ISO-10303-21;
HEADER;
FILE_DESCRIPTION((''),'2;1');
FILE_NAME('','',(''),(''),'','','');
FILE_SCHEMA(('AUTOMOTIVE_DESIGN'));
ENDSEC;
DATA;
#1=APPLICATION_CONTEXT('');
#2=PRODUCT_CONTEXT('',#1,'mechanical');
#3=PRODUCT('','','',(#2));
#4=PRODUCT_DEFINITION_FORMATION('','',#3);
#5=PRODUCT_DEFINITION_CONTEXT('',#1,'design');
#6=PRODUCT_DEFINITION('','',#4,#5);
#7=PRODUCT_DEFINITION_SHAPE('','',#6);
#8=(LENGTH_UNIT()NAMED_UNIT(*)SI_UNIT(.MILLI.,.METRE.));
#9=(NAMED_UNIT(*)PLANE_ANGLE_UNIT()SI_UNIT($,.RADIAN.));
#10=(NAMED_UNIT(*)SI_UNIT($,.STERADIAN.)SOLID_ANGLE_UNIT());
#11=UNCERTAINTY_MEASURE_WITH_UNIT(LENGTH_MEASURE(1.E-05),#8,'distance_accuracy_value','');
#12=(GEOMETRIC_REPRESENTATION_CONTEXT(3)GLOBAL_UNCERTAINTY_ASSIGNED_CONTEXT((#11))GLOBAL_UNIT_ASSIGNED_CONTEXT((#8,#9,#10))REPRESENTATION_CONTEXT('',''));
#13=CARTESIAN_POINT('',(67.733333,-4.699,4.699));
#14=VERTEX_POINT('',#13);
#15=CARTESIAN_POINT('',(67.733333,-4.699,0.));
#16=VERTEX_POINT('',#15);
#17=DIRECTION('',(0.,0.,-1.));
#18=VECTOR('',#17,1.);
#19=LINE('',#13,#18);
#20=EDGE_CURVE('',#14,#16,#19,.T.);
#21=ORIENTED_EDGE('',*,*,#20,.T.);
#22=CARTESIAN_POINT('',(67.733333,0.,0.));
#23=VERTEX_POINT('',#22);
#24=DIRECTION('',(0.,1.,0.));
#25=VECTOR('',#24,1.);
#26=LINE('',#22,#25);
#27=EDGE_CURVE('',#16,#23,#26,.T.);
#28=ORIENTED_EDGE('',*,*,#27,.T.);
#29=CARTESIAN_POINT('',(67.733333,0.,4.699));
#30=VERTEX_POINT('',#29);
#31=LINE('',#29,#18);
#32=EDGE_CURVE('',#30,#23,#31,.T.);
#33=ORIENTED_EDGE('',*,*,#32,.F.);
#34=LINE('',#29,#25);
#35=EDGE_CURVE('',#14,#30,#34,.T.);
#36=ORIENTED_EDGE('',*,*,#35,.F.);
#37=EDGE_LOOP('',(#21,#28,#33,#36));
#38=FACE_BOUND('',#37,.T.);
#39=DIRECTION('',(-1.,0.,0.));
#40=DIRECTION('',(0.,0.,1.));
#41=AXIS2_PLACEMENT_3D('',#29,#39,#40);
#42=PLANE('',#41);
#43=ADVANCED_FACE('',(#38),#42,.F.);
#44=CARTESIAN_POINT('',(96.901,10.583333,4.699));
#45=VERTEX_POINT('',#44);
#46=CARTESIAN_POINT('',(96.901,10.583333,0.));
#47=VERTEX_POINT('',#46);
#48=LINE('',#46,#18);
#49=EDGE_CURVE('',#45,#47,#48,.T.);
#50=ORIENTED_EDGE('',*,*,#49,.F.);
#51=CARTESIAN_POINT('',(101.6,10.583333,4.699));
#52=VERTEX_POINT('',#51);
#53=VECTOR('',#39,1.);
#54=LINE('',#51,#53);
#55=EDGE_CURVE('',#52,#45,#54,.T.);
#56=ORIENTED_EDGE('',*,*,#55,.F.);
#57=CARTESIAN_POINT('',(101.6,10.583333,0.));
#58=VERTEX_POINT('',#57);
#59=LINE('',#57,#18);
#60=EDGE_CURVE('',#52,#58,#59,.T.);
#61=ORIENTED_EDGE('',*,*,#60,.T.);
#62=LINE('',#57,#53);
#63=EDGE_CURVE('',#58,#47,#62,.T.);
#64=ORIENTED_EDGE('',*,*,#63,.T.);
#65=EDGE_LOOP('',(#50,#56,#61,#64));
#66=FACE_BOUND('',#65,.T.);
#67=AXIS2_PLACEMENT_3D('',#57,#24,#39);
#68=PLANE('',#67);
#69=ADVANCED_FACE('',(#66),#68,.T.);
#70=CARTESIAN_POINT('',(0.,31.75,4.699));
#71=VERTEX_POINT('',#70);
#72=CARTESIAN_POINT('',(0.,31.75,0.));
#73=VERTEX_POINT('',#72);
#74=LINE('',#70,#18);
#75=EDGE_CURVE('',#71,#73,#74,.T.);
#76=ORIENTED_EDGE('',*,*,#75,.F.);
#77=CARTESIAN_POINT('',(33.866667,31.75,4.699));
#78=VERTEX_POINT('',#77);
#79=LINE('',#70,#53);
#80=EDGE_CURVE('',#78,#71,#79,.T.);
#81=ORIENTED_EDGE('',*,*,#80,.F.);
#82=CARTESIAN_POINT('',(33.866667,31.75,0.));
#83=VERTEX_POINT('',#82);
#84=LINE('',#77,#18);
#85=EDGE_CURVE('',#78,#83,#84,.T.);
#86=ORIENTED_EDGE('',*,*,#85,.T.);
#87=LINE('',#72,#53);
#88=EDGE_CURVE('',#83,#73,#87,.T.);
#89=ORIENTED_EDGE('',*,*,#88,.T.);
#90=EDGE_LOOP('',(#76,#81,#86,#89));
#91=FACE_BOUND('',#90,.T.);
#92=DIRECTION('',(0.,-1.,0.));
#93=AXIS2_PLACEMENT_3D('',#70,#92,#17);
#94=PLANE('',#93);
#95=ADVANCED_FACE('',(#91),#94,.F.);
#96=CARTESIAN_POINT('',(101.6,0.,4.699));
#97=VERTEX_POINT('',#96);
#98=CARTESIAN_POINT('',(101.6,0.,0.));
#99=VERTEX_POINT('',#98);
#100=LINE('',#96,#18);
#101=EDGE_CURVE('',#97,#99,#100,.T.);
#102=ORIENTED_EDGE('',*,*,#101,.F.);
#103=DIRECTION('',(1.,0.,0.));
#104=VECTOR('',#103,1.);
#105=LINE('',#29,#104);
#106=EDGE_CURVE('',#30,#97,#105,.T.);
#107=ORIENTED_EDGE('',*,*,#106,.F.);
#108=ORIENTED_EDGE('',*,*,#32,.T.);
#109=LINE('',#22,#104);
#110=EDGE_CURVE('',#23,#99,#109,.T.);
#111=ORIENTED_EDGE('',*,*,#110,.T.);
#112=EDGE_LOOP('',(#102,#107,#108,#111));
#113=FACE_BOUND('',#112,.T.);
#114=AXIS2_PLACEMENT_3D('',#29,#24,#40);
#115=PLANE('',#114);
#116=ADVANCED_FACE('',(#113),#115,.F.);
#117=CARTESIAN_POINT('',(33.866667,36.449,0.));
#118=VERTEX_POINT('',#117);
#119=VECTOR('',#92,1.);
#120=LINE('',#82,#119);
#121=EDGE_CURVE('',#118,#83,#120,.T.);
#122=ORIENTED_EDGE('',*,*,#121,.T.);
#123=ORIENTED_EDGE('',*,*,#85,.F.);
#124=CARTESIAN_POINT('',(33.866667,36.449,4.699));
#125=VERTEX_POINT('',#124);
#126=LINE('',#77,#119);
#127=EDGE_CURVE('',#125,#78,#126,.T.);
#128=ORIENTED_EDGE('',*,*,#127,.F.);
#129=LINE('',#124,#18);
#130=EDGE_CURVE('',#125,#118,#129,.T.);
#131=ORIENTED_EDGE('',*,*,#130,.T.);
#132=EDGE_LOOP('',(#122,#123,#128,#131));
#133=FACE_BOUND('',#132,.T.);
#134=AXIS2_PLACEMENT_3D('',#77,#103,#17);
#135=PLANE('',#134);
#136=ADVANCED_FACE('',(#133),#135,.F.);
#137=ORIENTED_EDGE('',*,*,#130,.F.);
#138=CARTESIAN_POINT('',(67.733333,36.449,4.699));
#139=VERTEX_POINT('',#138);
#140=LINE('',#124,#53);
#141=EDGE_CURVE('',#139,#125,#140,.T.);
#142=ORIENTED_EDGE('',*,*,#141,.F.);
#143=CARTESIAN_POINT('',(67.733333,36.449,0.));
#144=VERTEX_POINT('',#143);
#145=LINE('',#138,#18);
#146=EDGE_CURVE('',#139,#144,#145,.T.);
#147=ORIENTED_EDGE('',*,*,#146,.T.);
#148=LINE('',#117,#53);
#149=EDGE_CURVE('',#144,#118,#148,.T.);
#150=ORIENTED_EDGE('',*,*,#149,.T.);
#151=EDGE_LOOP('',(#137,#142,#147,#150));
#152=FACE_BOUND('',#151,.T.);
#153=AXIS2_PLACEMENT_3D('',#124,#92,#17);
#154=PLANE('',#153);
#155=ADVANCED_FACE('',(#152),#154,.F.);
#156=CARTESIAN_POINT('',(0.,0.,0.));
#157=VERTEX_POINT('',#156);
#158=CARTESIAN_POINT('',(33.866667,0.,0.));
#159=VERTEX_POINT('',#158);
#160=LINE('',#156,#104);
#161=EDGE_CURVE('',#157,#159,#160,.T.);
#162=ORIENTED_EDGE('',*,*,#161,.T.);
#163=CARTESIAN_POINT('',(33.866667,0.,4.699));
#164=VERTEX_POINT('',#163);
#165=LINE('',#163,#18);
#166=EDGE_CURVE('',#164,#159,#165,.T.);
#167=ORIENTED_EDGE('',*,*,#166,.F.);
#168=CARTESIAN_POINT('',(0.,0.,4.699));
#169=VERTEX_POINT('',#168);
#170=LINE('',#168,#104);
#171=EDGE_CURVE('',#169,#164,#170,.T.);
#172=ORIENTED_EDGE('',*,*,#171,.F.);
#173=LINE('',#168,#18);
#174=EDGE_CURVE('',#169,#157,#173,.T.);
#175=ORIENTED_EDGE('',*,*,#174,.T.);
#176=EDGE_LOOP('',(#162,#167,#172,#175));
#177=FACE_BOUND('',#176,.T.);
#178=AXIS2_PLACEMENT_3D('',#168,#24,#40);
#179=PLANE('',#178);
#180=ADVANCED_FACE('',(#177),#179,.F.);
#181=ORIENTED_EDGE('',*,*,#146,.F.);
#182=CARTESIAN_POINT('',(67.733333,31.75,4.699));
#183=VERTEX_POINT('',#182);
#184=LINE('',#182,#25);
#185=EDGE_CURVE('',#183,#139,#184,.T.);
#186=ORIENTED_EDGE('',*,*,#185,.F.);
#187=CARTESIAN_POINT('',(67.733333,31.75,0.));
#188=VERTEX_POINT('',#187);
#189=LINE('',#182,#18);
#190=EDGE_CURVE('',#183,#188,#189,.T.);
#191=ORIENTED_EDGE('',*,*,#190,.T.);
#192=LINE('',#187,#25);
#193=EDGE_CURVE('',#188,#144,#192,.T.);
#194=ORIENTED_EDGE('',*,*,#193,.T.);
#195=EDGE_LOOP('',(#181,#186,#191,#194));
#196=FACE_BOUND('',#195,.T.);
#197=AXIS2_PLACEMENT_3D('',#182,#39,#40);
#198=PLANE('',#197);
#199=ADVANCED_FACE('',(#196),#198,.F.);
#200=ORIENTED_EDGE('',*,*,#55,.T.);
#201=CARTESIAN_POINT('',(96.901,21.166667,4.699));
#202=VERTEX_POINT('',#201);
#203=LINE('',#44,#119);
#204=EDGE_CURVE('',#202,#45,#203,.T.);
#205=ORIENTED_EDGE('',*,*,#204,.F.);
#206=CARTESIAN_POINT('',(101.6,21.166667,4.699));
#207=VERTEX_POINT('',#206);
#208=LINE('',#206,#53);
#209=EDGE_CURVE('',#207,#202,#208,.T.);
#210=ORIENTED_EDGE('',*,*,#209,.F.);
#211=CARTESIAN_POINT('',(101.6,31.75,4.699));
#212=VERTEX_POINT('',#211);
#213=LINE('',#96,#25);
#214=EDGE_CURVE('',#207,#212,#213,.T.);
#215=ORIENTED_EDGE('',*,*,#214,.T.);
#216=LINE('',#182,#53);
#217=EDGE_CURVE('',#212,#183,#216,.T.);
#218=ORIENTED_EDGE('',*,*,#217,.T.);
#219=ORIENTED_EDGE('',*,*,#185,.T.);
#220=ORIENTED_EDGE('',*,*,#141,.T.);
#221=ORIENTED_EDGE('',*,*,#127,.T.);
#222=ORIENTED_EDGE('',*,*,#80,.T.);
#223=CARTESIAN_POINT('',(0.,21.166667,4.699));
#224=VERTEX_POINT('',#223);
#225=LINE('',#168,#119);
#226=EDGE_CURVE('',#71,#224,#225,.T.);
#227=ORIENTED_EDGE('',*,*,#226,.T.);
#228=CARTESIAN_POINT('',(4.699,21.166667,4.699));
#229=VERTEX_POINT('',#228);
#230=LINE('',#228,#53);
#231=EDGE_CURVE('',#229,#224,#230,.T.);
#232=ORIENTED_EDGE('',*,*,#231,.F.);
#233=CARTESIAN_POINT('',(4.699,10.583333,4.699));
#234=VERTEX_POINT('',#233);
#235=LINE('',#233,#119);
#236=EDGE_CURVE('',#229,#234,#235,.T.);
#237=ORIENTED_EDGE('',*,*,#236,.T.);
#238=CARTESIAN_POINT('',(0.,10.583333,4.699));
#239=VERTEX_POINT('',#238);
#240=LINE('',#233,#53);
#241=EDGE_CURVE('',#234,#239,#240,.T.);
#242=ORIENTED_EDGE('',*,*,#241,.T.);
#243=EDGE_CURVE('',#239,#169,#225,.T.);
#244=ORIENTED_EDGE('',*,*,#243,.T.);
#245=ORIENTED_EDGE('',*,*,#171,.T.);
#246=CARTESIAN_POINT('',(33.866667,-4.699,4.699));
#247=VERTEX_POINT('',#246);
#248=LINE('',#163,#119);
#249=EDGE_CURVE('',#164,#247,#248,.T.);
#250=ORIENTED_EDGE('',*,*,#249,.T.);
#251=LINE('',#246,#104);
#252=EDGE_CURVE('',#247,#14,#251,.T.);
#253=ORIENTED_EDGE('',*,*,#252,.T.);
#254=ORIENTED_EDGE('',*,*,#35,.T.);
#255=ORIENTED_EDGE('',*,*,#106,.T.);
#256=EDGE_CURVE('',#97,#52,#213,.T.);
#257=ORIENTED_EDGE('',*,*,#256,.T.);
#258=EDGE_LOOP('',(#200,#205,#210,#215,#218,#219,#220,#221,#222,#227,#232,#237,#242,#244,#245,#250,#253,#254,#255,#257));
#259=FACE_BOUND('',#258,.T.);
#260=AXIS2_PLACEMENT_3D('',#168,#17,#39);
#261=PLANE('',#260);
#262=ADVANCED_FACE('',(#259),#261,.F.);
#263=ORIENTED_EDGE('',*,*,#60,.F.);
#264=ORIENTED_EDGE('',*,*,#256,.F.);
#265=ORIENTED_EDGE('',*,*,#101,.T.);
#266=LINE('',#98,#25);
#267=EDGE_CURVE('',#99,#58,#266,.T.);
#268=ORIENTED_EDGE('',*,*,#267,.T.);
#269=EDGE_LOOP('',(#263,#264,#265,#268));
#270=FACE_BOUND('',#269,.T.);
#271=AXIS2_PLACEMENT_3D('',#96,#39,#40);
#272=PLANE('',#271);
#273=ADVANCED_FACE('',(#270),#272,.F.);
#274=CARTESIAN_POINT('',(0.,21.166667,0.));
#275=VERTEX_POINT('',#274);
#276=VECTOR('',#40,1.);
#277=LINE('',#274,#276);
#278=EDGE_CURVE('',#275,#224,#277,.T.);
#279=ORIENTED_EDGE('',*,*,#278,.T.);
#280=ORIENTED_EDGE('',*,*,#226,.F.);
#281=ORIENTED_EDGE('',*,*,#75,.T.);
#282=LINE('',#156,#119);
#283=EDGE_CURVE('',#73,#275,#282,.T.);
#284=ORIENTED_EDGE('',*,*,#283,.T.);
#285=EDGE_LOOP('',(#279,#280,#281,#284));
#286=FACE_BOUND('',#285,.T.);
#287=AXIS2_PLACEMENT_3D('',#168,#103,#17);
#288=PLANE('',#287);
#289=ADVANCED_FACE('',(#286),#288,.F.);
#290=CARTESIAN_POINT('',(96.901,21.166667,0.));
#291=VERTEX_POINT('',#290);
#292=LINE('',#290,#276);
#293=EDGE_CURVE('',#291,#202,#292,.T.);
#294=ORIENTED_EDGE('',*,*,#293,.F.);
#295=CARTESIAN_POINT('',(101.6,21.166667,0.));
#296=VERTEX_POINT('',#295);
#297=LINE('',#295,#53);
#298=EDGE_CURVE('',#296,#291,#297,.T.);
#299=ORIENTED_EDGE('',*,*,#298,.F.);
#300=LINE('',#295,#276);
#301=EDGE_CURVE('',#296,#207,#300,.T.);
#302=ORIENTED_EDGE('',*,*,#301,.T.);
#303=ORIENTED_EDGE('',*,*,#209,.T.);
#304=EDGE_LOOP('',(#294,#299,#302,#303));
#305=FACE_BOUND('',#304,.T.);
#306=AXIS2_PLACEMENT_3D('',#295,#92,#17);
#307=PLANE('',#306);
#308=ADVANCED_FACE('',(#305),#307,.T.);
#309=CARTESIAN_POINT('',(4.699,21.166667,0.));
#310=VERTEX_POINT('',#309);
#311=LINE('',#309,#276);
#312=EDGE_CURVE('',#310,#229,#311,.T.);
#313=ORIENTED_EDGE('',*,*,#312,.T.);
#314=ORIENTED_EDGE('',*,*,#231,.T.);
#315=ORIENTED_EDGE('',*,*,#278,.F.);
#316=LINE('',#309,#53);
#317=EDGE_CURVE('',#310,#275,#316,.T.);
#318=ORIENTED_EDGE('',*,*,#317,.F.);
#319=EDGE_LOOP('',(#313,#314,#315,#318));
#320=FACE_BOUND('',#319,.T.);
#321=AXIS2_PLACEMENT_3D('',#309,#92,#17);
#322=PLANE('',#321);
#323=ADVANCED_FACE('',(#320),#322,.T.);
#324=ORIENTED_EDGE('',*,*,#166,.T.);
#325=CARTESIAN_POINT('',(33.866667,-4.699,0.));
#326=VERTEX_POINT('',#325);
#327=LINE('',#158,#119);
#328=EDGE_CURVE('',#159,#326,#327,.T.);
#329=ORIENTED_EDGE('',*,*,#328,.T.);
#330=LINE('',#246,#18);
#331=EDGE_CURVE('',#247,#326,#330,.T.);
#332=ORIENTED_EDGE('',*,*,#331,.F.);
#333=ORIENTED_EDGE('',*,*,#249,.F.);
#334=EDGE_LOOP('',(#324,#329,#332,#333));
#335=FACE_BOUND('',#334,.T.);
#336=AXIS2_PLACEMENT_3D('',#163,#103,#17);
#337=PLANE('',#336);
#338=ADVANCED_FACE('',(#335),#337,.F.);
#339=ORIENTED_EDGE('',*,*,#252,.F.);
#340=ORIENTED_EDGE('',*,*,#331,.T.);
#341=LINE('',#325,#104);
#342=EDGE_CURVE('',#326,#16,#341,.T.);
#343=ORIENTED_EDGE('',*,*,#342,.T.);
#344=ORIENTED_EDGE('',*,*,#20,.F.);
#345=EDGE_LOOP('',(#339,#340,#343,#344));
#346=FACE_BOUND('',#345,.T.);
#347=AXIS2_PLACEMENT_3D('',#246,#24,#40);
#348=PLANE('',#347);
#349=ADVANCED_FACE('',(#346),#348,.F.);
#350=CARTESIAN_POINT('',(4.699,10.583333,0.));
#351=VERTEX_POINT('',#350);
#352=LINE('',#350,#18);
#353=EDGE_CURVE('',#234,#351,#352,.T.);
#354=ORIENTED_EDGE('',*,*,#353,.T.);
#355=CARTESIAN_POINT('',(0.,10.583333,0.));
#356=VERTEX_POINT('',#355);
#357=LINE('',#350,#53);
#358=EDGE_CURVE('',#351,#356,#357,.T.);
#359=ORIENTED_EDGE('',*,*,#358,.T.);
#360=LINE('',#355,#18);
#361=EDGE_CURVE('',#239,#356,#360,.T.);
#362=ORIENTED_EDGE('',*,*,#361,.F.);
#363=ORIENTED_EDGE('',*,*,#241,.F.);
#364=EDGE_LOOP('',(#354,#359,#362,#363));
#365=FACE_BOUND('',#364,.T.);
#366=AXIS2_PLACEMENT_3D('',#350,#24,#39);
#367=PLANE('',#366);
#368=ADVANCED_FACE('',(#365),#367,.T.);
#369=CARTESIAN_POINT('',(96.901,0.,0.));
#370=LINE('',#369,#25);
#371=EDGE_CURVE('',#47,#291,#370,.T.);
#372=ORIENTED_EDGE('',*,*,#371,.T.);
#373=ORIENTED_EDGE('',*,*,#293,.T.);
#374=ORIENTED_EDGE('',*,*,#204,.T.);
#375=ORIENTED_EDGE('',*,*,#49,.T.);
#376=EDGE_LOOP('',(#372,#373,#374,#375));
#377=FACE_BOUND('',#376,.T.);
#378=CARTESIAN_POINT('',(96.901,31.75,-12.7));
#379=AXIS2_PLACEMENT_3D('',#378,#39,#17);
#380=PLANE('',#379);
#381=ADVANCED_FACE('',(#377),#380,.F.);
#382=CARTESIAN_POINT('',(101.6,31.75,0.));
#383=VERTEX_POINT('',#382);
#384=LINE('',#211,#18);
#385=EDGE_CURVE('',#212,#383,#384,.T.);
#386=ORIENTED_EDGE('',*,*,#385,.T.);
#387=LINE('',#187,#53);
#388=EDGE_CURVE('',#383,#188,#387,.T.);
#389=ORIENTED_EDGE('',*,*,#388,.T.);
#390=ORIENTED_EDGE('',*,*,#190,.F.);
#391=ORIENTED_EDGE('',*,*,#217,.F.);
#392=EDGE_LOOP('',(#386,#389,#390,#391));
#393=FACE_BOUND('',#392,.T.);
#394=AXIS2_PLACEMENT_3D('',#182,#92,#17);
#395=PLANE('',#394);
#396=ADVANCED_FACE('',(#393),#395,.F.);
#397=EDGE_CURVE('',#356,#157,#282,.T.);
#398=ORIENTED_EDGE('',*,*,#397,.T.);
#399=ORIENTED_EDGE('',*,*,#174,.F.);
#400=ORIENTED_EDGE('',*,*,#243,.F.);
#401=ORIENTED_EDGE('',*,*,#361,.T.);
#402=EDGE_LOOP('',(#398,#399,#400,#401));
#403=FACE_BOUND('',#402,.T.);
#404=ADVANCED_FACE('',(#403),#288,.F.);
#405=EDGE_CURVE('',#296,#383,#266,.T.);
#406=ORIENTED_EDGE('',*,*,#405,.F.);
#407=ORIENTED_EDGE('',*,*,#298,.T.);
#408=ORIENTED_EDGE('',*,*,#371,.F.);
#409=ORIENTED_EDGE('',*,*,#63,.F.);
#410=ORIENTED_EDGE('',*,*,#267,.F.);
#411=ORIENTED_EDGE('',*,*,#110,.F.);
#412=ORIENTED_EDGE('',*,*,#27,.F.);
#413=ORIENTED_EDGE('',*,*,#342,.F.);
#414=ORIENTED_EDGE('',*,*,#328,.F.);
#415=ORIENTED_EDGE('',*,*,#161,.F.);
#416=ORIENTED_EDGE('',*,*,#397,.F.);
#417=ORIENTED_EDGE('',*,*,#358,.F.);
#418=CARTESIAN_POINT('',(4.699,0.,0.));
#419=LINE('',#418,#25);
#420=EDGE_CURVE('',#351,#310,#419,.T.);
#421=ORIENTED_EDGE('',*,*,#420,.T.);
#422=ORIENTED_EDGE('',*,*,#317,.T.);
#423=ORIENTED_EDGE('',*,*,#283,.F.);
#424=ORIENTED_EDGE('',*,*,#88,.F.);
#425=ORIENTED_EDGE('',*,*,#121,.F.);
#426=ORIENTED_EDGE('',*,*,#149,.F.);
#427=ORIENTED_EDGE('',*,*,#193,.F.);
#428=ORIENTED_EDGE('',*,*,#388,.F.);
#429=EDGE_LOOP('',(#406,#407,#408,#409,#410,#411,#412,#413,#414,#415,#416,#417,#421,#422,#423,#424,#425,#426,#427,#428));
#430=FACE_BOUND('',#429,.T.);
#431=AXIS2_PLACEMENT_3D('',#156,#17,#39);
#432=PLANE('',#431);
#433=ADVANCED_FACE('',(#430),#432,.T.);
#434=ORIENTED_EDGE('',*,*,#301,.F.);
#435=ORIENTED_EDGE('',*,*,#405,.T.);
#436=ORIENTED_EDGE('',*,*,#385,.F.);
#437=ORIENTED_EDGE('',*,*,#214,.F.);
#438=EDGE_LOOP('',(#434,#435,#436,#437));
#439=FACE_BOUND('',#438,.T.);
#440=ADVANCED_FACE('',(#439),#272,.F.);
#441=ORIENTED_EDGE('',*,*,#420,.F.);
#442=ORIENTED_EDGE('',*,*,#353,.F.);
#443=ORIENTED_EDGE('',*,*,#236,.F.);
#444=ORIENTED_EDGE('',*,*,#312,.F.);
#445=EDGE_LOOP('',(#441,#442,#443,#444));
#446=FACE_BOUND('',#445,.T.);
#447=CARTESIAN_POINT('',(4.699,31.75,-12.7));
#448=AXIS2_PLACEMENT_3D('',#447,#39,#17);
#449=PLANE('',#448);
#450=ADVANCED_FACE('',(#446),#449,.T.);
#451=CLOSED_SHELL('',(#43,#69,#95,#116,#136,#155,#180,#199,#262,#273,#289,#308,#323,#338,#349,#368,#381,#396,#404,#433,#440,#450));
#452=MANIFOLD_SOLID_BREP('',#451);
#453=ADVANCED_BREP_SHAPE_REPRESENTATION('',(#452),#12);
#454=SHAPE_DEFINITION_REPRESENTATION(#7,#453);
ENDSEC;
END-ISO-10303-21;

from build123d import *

# Parameters (mm, degrees)
BOSS_EXTRUDE1_DEPTH = 4.699
CAVITY1_START       = 10.583333333
CAVITY1_OUTLINE_W   = 4.699
CAVITY1_OUTLINE_H   = 4.699
CAVITY1_DEPTH       = 10.583333334


# Read off the part's stored shape, not the designer's step: Cavity1
with BuildPart() as part:
    # Sketch1 → Boss-Extrude1 (new body)
    with BuildSketch(Plane.XY):
        Polygon((67.733333333, 31.75), (101.6, 31.75), (101.6, 0), (67.733333333, 0), (67.733333333, -4.699), (33.866666667, -4.699), (33.866666667, 0), (0, 0), (0, 31.75), (33.866666667, 31.75), (33.866666667, 36.449), (67.733333333, 36.449), align=None)
    extrude(amount=BOSS_EXTRUDE1_DEPTH)

    # Cavity1 outline → Cavity1 (cut)
    with BuildSketch(Plane(origin=(0, 0, 0), x_dir=(1, 0, 0), z_dir=(0, 1, 0)).offset(CAVITY1_START)):
        with Locations((2.3495, -2.3495)):
            Rectangle(CAVITY1_OUTLINE_W, CAVITY1_OUTLINE_H)
        with Locations((99.2505, -2.3495)):
            Rectangle(CAVITY1_OUTLINE_W, CAVITY1_OUTLINE_H)
    extrude(amount=CAVITY1_DEPTH, mode=Mode.SUBTRACT)


solid = part.part
